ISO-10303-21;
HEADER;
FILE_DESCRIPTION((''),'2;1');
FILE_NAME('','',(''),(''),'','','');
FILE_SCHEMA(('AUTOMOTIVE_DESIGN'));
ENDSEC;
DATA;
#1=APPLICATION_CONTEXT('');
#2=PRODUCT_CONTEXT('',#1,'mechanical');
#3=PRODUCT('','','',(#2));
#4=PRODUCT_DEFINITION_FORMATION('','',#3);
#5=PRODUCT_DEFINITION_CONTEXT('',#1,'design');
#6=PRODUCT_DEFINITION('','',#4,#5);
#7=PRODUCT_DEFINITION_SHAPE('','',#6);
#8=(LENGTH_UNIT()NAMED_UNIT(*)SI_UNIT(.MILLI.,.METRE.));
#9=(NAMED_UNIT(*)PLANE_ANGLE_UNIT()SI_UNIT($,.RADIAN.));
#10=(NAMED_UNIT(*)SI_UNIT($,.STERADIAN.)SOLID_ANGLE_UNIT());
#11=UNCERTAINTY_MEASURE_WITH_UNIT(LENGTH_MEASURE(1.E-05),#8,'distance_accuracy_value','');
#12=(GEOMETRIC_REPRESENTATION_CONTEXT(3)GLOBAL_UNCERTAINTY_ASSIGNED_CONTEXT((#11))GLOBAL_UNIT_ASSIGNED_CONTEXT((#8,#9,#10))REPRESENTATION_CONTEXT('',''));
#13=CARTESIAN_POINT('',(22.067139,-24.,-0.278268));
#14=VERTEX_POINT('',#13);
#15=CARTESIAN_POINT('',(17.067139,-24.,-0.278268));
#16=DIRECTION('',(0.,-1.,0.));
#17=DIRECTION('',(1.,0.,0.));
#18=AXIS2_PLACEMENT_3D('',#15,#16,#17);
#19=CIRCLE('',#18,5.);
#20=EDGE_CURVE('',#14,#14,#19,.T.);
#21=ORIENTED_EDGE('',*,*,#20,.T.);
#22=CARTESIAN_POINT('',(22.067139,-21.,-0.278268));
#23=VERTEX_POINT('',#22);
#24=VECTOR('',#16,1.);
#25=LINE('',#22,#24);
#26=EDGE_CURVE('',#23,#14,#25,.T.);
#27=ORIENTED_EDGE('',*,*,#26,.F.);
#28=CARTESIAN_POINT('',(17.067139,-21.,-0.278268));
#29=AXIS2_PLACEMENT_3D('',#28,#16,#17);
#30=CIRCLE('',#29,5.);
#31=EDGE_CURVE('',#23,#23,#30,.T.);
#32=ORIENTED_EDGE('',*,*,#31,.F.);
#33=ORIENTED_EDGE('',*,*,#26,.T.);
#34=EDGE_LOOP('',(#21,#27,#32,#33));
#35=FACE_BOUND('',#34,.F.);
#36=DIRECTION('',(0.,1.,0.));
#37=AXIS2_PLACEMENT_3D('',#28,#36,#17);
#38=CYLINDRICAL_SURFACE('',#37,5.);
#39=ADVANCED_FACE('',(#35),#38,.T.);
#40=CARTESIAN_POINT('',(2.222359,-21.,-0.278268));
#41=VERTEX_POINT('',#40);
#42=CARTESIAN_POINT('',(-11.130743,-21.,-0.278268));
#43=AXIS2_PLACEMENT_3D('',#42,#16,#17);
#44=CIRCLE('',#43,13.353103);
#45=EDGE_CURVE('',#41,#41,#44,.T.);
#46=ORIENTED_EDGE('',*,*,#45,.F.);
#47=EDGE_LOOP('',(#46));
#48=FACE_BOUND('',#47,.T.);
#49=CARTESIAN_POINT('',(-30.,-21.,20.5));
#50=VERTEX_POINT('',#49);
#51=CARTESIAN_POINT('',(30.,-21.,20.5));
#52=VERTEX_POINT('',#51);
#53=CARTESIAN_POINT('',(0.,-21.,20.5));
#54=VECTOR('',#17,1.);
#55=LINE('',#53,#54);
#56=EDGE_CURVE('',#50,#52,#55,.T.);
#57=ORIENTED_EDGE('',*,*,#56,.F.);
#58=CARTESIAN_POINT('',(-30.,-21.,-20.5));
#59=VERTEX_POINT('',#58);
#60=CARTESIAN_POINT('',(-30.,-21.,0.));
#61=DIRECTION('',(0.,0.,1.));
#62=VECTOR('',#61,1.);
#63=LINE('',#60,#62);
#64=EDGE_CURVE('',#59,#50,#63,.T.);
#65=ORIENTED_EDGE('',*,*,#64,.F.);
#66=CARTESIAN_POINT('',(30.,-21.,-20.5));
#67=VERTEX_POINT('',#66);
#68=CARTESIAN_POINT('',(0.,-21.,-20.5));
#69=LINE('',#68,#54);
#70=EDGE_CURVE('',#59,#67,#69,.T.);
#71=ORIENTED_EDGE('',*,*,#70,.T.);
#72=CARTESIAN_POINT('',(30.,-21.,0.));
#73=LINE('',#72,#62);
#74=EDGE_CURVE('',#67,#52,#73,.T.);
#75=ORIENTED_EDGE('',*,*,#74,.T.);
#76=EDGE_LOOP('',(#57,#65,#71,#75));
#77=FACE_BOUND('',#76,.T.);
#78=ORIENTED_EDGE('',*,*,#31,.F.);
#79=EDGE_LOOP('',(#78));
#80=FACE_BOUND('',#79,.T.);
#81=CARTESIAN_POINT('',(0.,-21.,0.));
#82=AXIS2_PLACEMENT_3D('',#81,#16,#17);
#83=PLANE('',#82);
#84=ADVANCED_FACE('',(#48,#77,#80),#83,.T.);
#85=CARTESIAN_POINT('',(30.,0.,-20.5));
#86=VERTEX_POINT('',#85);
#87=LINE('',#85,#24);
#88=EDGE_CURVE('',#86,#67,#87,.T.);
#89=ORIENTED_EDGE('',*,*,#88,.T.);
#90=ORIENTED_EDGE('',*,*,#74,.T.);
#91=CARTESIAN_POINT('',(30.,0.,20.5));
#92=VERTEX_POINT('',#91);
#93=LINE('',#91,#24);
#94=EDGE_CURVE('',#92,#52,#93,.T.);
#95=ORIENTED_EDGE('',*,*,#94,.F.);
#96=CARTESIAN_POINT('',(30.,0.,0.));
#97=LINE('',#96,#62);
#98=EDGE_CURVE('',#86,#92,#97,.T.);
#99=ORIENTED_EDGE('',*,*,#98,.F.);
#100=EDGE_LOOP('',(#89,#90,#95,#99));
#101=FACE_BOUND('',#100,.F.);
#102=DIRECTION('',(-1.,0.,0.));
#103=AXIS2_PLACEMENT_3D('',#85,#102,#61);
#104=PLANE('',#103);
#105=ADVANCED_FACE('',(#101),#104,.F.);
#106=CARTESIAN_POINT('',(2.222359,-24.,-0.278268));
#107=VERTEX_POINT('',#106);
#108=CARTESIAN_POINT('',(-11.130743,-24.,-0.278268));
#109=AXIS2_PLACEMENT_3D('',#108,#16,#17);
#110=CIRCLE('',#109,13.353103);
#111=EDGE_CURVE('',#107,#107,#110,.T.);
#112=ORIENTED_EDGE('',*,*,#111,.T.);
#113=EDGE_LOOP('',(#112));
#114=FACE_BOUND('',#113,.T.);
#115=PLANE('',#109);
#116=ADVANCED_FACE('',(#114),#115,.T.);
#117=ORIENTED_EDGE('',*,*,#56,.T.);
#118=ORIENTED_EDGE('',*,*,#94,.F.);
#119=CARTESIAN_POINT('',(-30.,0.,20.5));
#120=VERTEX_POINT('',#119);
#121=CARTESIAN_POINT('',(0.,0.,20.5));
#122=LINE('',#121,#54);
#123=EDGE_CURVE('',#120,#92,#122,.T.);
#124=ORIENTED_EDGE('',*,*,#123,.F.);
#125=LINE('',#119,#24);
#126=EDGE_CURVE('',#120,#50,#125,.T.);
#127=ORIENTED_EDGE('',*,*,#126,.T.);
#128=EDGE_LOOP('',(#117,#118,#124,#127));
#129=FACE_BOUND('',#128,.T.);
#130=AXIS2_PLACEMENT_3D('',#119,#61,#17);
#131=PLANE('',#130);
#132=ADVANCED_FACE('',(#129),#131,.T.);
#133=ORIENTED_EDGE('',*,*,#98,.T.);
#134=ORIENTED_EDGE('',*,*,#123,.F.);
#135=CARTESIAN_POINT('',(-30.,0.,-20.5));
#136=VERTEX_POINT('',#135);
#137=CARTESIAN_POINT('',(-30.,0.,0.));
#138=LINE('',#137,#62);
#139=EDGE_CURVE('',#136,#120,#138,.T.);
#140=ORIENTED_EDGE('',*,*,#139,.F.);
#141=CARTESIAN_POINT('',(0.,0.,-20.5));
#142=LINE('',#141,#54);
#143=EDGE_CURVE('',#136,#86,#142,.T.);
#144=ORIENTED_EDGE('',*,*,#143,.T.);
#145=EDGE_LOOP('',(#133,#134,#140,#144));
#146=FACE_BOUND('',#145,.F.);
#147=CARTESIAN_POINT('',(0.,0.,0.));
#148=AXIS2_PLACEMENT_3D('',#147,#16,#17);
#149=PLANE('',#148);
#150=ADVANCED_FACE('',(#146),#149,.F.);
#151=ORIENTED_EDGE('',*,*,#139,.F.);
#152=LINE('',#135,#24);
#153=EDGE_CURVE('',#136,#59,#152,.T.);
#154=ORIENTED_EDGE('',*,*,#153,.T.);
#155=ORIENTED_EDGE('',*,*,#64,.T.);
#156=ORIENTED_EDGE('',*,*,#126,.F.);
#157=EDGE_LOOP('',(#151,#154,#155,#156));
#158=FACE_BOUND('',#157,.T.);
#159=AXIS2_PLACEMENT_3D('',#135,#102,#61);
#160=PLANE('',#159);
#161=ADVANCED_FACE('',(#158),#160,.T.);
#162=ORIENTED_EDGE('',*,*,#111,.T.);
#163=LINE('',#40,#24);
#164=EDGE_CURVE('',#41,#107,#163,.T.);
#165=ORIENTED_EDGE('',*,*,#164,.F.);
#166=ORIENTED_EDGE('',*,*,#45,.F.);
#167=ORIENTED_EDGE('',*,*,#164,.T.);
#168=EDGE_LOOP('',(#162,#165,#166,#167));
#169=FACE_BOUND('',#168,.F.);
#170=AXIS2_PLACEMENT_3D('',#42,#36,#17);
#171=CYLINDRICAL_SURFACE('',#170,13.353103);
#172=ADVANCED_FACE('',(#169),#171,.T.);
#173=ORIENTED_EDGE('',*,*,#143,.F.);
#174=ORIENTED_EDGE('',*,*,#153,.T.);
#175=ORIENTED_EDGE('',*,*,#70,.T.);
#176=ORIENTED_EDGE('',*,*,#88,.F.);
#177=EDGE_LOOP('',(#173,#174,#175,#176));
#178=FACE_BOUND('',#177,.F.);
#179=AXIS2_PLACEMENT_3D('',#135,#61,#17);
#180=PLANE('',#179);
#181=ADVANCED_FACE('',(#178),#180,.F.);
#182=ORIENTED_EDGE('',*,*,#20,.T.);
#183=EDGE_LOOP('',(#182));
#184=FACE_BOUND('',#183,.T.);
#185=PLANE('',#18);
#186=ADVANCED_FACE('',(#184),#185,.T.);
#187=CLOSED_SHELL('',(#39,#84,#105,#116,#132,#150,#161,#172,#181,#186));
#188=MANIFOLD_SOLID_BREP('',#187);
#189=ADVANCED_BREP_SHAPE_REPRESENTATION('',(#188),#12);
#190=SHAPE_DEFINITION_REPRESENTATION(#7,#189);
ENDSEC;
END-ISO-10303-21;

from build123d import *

# Parameters (mm, degrees)
F0_W     = 60
F0_H     = 41
F1_DEPTH = 21
F2_R     = 13.3531025353
F2_R_2   = 5
F3_DEPTH = 3


# Not quite as in the source:
# - a feature names something its author has since deleted; it is built from what else it names


with BuildPart() as f1:
    # F0 (on Front) → F1 (new body)
    with BuildSketch(Plane.XZ):
        Rectangle(F0_W, F0_H)
    extrude(amount=F1_DEPTH)

    # F2 (on face) → F3 (join)
    with BuildSketch(Plane.XZ.offset(21)):
        with Locations((-11.1307431944, -0.2782683878)):
            Circle(F2_R)
        with Locations((17.0671385713, -0.2782683878)):
            Circle(F2_R_2)
    extrude(amount=F3_DEPTH)


solid = f1.part
